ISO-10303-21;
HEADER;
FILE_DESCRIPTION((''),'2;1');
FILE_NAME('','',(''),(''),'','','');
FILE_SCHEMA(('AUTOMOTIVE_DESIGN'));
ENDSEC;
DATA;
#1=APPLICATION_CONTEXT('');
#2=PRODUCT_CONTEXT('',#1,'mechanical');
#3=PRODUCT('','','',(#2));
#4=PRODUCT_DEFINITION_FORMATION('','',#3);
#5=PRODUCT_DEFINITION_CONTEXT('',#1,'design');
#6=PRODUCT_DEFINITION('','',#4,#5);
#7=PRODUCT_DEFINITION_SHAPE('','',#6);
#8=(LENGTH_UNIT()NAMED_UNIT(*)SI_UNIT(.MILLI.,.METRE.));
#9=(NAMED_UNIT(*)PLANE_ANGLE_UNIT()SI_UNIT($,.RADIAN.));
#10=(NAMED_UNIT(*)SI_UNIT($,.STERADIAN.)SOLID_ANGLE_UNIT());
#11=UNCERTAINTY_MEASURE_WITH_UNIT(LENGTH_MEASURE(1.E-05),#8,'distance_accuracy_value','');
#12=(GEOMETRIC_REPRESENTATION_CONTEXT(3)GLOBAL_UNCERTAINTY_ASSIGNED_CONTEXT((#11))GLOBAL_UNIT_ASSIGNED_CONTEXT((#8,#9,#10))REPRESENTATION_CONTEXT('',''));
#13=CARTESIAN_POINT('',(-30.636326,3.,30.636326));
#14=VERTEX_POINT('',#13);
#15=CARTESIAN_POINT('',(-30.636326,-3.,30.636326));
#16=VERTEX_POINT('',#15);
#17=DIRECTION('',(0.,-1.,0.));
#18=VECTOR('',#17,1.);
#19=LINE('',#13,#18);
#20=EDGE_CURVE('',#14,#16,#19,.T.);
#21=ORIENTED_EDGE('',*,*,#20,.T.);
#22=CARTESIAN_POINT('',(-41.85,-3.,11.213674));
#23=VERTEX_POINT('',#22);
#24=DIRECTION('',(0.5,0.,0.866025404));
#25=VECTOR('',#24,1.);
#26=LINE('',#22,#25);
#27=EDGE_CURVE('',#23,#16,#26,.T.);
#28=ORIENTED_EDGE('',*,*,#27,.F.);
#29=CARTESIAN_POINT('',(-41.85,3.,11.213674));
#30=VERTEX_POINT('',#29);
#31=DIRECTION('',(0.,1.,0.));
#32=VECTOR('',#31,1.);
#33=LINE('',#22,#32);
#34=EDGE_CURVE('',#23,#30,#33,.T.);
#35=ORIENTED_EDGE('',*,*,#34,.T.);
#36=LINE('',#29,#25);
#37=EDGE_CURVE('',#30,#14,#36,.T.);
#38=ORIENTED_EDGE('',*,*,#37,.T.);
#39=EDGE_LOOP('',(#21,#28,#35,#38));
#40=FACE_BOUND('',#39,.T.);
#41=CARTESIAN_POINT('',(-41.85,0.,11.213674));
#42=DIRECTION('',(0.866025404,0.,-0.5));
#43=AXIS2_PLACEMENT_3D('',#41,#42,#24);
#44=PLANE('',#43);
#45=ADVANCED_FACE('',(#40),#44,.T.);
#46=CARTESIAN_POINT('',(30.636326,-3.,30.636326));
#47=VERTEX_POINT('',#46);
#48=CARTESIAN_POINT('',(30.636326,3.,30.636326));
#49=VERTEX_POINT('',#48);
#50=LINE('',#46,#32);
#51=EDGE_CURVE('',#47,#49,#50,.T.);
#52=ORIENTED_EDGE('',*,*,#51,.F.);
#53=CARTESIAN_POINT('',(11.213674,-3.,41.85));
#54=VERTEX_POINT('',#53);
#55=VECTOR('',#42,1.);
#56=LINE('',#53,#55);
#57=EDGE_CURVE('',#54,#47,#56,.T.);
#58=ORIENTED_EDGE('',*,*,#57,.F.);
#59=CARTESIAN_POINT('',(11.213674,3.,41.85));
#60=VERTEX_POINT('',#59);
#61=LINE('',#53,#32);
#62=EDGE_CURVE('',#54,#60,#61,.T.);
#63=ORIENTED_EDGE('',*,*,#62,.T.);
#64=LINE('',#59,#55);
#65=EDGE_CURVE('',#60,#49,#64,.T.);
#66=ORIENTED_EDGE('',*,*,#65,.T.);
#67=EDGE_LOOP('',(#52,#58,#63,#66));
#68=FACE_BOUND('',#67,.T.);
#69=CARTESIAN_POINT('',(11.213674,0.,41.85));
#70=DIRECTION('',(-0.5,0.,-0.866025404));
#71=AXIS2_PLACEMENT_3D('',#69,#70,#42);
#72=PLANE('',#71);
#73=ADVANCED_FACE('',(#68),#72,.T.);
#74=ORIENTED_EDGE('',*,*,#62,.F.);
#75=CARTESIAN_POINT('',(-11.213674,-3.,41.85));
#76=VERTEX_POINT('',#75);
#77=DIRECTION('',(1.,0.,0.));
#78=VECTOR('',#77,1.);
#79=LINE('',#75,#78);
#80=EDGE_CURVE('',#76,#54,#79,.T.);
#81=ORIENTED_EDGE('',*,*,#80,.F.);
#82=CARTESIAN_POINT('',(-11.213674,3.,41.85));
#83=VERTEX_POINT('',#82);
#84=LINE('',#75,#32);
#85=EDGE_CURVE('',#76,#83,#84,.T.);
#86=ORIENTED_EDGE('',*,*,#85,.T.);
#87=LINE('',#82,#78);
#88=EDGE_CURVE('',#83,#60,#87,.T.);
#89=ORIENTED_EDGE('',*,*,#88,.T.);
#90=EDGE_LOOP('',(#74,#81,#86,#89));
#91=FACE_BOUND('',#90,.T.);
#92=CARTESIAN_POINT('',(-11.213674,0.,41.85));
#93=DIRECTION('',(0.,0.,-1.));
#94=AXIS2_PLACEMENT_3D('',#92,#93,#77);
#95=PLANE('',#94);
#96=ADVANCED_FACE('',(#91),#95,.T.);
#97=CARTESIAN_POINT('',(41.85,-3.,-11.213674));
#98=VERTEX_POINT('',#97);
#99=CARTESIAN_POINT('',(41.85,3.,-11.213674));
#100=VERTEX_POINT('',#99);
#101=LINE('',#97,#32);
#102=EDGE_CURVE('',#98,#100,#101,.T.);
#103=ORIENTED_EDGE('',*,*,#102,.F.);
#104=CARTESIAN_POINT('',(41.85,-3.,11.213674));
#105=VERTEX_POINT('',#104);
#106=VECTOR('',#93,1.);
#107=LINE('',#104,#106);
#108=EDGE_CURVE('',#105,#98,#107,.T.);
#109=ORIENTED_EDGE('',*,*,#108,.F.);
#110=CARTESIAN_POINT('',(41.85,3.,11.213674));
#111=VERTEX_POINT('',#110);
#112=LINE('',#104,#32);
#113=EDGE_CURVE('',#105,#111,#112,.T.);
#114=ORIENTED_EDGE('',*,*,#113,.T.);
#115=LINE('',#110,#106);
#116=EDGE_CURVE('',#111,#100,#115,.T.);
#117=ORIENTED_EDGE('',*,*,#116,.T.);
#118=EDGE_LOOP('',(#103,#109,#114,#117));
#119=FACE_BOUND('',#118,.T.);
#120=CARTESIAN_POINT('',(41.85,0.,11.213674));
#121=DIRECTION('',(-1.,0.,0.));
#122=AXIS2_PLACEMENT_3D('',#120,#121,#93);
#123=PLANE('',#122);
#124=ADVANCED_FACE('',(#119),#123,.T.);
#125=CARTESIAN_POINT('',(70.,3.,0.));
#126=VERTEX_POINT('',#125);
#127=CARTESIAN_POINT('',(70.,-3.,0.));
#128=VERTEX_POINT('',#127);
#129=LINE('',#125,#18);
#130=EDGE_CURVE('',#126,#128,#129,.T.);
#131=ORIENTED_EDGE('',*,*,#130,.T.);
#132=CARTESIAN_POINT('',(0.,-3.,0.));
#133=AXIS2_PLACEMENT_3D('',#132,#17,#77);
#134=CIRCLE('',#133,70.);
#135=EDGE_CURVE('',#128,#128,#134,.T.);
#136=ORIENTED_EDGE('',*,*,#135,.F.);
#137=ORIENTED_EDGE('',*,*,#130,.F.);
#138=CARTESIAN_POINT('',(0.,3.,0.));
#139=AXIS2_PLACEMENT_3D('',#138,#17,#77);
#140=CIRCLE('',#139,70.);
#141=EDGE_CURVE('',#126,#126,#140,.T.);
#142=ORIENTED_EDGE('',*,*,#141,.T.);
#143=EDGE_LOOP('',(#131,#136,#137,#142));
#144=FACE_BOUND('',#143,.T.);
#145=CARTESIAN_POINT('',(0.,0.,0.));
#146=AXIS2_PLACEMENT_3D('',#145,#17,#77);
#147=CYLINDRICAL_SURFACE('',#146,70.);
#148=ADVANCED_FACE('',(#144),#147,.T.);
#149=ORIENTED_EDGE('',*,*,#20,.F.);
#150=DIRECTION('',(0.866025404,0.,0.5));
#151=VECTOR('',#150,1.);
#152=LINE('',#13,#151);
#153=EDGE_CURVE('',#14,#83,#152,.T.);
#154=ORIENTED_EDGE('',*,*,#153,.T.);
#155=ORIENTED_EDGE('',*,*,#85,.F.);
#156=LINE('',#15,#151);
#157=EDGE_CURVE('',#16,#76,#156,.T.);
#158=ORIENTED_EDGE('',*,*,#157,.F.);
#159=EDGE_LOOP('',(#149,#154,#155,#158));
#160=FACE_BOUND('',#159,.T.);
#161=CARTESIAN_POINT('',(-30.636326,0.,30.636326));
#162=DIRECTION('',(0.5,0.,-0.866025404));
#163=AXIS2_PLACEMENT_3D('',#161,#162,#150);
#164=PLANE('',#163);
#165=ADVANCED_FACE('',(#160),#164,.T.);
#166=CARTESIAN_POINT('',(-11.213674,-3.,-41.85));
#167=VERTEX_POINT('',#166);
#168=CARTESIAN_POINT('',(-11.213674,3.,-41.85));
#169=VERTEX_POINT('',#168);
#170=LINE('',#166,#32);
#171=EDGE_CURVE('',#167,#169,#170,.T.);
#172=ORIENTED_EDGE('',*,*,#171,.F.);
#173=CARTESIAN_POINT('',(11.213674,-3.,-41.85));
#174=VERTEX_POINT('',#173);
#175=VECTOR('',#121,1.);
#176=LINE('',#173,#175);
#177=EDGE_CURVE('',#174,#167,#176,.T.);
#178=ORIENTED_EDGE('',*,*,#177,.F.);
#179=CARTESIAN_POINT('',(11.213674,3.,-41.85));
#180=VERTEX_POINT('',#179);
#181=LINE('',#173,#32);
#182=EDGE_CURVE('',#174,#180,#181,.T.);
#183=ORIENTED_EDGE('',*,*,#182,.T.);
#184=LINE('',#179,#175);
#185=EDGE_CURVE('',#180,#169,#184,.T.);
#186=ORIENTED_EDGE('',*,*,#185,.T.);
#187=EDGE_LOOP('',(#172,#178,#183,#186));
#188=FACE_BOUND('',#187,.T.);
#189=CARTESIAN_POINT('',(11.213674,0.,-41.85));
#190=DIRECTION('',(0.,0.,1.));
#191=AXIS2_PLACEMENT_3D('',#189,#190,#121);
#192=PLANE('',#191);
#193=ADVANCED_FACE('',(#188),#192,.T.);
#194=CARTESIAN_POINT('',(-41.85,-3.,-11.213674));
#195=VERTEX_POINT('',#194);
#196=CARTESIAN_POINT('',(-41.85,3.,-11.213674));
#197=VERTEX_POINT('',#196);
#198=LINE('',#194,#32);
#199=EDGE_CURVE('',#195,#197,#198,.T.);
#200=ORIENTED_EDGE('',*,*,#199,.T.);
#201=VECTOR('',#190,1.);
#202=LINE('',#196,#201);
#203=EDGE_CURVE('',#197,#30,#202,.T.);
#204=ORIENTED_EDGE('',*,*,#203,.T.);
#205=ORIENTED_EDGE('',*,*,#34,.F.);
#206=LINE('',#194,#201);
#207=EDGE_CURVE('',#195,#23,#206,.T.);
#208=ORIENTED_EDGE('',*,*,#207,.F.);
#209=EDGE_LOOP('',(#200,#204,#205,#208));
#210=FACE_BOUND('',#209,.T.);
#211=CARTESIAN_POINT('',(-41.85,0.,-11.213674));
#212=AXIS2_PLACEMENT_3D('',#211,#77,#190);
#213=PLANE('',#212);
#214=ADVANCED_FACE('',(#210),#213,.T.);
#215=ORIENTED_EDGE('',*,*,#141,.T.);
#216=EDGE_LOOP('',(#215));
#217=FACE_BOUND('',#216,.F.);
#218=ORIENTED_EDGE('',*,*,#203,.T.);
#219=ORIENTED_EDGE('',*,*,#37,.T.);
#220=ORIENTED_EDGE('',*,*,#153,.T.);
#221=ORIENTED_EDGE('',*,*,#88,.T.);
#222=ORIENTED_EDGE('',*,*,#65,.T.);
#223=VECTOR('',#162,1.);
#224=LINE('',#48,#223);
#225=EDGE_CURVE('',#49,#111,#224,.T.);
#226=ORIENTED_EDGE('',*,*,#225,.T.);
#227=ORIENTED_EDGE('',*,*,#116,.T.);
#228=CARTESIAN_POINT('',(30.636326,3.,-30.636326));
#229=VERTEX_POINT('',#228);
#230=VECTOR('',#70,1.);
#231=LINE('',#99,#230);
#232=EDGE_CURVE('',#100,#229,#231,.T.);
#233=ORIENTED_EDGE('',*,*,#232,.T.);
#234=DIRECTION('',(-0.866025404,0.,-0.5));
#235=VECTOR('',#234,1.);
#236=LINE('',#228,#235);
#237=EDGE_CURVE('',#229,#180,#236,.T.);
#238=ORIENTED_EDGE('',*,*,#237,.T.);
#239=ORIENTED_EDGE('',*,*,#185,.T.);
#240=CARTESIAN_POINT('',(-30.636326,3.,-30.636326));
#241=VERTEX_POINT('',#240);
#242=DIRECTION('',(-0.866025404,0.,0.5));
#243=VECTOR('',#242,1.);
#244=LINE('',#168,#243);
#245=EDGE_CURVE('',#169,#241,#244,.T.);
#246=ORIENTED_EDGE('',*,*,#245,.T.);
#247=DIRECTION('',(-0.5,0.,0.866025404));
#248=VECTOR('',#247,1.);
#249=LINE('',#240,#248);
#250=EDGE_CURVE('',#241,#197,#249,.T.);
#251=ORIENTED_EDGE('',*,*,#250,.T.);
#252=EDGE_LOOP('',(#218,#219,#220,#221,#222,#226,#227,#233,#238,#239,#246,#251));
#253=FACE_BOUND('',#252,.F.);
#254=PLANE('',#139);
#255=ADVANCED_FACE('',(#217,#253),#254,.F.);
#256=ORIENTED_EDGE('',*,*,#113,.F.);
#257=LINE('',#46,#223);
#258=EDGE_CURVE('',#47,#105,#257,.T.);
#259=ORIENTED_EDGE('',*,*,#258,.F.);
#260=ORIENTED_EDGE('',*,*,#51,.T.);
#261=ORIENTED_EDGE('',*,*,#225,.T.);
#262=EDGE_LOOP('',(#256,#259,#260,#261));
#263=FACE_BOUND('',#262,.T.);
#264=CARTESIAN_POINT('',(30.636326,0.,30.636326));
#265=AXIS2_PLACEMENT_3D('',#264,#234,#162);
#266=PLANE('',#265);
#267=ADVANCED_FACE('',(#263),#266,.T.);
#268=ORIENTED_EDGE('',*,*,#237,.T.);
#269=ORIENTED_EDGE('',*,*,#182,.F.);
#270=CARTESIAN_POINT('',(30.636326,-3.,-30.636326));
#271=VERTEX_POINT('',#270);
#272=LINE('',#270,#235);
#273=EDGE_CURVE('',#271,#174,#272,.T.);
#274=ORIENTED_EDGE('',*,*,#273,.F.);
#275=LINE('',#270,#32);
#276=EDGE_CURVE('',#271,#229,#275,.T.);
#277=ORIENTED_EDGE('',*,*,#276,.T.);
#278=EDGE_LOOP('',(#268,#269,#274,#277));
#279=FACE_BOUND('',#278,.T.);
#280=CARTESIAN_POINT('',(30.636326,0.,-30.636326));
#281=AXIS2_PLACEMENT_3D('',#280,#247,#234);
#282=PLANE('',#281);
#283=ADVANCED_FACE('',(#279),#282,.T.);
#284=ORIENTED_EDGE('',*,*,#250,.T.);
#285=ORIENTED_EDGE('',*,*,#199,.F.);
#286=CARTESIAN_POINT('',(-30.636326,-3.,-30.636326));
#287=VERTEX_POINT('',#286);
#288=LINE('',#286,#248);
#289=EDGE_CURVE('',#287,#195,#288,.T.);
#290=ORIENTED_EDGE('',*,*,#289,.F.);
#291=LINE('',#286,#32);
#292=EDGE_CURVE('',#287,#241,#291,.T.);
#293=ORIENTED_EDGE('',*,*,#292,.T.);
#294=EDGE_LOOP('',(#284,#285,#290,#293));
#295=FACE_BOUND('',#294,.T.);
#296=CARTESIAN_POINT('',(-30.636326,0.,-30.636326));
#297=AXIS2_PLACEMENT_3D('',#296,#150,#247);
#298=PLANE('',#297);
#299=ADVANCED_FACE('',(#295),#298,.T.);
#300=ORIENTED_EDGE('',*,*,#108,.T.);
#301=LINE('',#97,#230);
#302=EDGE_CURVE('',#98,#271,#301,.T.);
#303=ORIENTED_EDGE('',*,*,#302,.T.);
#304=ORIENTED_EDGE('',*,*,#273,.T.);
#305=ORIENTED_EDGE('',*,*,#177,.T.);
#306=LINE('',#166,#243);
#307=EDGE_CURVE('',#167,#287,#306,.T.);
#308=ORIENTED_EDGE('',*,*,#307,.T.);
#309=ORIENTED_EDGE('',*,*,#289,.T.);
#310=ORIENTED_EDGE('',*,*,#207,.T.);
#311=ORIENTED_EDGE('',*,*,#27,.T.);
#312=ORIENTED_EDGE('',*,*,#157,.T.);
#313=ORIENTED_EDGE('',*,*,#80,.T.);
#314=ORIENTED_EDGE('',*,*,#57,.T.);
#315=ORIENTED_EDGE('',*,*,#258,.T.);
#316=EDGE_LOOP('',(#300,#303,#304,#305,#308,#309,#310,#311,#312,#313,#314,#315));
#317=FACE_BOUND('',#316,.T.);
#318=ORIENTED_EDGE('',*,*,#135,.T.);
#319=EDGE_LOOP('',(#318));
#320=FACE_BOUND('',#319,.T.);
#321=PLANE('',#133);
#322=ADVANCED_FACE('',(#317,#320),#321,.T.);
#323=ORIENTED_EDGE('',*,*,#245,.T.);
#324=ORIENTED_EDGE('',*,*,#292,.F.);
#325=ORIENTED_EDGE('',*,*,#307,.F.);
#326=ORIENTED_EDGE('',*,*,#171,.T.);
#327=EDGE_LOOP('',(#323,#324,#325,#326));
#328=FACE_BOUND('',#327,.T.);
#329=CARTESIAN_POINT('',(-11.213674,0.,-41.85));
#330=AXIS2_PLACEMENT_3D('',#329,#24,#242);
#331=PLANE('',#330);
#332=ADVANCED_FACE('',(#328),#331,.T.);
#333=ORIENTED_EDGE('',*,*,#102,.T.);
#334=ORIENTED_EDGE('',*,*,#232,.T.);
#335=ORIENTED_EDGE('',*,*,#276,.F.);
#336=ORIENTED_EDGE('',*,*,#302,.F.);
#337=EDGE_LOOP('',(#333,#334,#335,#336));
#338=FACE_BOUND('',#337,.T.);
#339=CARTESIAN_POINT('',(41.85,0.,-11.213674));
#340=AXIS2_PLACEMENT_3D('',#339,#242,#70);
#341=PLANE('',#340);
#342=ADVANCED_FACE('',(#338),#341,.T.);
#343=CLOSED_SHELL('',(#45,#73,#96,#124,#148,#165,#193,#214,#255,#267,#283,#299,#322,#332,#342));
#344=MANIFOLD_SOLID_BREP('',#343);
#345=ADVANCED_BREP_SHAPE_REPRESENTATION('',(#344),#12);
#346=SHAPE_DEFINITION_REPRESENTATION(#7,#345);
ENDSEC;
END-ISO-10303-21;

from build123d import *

# Parameters (mm, degrees)
F0_R     = 70
F1_DEPTH = 3


# Not quite as in the source:
# - a feature of the source that left no trace in its solid (it failed there, or was rolled back) is left out


with BuildPart() as f1:
    # F0 (on Front) → F1 (new body, symmetric)
    with BuildSketch(Plane.XZ):
        Circle(F0_R)
        Polygon((-30.6363262968, 30.6363262968), (-11.2136737032, 41.85), (11.2136737032, 41.85), (30.6363262968, 30.6363262968), (41.85, 11.2136737032), (41.85, -11.2136737032), (30.6363262968, -30.6363262968), (11.2136737032, -41.85), (-11.2136737032, -41.85), (-30.6363262968, -30.6363262968), (-41.85, -11.2136737032), (-41.85, 11.2136737032), align=None, mode=Mode.SUBTRACT)
    extrude(amount=F1_DEPTH, both=True)


solid = f1.part
